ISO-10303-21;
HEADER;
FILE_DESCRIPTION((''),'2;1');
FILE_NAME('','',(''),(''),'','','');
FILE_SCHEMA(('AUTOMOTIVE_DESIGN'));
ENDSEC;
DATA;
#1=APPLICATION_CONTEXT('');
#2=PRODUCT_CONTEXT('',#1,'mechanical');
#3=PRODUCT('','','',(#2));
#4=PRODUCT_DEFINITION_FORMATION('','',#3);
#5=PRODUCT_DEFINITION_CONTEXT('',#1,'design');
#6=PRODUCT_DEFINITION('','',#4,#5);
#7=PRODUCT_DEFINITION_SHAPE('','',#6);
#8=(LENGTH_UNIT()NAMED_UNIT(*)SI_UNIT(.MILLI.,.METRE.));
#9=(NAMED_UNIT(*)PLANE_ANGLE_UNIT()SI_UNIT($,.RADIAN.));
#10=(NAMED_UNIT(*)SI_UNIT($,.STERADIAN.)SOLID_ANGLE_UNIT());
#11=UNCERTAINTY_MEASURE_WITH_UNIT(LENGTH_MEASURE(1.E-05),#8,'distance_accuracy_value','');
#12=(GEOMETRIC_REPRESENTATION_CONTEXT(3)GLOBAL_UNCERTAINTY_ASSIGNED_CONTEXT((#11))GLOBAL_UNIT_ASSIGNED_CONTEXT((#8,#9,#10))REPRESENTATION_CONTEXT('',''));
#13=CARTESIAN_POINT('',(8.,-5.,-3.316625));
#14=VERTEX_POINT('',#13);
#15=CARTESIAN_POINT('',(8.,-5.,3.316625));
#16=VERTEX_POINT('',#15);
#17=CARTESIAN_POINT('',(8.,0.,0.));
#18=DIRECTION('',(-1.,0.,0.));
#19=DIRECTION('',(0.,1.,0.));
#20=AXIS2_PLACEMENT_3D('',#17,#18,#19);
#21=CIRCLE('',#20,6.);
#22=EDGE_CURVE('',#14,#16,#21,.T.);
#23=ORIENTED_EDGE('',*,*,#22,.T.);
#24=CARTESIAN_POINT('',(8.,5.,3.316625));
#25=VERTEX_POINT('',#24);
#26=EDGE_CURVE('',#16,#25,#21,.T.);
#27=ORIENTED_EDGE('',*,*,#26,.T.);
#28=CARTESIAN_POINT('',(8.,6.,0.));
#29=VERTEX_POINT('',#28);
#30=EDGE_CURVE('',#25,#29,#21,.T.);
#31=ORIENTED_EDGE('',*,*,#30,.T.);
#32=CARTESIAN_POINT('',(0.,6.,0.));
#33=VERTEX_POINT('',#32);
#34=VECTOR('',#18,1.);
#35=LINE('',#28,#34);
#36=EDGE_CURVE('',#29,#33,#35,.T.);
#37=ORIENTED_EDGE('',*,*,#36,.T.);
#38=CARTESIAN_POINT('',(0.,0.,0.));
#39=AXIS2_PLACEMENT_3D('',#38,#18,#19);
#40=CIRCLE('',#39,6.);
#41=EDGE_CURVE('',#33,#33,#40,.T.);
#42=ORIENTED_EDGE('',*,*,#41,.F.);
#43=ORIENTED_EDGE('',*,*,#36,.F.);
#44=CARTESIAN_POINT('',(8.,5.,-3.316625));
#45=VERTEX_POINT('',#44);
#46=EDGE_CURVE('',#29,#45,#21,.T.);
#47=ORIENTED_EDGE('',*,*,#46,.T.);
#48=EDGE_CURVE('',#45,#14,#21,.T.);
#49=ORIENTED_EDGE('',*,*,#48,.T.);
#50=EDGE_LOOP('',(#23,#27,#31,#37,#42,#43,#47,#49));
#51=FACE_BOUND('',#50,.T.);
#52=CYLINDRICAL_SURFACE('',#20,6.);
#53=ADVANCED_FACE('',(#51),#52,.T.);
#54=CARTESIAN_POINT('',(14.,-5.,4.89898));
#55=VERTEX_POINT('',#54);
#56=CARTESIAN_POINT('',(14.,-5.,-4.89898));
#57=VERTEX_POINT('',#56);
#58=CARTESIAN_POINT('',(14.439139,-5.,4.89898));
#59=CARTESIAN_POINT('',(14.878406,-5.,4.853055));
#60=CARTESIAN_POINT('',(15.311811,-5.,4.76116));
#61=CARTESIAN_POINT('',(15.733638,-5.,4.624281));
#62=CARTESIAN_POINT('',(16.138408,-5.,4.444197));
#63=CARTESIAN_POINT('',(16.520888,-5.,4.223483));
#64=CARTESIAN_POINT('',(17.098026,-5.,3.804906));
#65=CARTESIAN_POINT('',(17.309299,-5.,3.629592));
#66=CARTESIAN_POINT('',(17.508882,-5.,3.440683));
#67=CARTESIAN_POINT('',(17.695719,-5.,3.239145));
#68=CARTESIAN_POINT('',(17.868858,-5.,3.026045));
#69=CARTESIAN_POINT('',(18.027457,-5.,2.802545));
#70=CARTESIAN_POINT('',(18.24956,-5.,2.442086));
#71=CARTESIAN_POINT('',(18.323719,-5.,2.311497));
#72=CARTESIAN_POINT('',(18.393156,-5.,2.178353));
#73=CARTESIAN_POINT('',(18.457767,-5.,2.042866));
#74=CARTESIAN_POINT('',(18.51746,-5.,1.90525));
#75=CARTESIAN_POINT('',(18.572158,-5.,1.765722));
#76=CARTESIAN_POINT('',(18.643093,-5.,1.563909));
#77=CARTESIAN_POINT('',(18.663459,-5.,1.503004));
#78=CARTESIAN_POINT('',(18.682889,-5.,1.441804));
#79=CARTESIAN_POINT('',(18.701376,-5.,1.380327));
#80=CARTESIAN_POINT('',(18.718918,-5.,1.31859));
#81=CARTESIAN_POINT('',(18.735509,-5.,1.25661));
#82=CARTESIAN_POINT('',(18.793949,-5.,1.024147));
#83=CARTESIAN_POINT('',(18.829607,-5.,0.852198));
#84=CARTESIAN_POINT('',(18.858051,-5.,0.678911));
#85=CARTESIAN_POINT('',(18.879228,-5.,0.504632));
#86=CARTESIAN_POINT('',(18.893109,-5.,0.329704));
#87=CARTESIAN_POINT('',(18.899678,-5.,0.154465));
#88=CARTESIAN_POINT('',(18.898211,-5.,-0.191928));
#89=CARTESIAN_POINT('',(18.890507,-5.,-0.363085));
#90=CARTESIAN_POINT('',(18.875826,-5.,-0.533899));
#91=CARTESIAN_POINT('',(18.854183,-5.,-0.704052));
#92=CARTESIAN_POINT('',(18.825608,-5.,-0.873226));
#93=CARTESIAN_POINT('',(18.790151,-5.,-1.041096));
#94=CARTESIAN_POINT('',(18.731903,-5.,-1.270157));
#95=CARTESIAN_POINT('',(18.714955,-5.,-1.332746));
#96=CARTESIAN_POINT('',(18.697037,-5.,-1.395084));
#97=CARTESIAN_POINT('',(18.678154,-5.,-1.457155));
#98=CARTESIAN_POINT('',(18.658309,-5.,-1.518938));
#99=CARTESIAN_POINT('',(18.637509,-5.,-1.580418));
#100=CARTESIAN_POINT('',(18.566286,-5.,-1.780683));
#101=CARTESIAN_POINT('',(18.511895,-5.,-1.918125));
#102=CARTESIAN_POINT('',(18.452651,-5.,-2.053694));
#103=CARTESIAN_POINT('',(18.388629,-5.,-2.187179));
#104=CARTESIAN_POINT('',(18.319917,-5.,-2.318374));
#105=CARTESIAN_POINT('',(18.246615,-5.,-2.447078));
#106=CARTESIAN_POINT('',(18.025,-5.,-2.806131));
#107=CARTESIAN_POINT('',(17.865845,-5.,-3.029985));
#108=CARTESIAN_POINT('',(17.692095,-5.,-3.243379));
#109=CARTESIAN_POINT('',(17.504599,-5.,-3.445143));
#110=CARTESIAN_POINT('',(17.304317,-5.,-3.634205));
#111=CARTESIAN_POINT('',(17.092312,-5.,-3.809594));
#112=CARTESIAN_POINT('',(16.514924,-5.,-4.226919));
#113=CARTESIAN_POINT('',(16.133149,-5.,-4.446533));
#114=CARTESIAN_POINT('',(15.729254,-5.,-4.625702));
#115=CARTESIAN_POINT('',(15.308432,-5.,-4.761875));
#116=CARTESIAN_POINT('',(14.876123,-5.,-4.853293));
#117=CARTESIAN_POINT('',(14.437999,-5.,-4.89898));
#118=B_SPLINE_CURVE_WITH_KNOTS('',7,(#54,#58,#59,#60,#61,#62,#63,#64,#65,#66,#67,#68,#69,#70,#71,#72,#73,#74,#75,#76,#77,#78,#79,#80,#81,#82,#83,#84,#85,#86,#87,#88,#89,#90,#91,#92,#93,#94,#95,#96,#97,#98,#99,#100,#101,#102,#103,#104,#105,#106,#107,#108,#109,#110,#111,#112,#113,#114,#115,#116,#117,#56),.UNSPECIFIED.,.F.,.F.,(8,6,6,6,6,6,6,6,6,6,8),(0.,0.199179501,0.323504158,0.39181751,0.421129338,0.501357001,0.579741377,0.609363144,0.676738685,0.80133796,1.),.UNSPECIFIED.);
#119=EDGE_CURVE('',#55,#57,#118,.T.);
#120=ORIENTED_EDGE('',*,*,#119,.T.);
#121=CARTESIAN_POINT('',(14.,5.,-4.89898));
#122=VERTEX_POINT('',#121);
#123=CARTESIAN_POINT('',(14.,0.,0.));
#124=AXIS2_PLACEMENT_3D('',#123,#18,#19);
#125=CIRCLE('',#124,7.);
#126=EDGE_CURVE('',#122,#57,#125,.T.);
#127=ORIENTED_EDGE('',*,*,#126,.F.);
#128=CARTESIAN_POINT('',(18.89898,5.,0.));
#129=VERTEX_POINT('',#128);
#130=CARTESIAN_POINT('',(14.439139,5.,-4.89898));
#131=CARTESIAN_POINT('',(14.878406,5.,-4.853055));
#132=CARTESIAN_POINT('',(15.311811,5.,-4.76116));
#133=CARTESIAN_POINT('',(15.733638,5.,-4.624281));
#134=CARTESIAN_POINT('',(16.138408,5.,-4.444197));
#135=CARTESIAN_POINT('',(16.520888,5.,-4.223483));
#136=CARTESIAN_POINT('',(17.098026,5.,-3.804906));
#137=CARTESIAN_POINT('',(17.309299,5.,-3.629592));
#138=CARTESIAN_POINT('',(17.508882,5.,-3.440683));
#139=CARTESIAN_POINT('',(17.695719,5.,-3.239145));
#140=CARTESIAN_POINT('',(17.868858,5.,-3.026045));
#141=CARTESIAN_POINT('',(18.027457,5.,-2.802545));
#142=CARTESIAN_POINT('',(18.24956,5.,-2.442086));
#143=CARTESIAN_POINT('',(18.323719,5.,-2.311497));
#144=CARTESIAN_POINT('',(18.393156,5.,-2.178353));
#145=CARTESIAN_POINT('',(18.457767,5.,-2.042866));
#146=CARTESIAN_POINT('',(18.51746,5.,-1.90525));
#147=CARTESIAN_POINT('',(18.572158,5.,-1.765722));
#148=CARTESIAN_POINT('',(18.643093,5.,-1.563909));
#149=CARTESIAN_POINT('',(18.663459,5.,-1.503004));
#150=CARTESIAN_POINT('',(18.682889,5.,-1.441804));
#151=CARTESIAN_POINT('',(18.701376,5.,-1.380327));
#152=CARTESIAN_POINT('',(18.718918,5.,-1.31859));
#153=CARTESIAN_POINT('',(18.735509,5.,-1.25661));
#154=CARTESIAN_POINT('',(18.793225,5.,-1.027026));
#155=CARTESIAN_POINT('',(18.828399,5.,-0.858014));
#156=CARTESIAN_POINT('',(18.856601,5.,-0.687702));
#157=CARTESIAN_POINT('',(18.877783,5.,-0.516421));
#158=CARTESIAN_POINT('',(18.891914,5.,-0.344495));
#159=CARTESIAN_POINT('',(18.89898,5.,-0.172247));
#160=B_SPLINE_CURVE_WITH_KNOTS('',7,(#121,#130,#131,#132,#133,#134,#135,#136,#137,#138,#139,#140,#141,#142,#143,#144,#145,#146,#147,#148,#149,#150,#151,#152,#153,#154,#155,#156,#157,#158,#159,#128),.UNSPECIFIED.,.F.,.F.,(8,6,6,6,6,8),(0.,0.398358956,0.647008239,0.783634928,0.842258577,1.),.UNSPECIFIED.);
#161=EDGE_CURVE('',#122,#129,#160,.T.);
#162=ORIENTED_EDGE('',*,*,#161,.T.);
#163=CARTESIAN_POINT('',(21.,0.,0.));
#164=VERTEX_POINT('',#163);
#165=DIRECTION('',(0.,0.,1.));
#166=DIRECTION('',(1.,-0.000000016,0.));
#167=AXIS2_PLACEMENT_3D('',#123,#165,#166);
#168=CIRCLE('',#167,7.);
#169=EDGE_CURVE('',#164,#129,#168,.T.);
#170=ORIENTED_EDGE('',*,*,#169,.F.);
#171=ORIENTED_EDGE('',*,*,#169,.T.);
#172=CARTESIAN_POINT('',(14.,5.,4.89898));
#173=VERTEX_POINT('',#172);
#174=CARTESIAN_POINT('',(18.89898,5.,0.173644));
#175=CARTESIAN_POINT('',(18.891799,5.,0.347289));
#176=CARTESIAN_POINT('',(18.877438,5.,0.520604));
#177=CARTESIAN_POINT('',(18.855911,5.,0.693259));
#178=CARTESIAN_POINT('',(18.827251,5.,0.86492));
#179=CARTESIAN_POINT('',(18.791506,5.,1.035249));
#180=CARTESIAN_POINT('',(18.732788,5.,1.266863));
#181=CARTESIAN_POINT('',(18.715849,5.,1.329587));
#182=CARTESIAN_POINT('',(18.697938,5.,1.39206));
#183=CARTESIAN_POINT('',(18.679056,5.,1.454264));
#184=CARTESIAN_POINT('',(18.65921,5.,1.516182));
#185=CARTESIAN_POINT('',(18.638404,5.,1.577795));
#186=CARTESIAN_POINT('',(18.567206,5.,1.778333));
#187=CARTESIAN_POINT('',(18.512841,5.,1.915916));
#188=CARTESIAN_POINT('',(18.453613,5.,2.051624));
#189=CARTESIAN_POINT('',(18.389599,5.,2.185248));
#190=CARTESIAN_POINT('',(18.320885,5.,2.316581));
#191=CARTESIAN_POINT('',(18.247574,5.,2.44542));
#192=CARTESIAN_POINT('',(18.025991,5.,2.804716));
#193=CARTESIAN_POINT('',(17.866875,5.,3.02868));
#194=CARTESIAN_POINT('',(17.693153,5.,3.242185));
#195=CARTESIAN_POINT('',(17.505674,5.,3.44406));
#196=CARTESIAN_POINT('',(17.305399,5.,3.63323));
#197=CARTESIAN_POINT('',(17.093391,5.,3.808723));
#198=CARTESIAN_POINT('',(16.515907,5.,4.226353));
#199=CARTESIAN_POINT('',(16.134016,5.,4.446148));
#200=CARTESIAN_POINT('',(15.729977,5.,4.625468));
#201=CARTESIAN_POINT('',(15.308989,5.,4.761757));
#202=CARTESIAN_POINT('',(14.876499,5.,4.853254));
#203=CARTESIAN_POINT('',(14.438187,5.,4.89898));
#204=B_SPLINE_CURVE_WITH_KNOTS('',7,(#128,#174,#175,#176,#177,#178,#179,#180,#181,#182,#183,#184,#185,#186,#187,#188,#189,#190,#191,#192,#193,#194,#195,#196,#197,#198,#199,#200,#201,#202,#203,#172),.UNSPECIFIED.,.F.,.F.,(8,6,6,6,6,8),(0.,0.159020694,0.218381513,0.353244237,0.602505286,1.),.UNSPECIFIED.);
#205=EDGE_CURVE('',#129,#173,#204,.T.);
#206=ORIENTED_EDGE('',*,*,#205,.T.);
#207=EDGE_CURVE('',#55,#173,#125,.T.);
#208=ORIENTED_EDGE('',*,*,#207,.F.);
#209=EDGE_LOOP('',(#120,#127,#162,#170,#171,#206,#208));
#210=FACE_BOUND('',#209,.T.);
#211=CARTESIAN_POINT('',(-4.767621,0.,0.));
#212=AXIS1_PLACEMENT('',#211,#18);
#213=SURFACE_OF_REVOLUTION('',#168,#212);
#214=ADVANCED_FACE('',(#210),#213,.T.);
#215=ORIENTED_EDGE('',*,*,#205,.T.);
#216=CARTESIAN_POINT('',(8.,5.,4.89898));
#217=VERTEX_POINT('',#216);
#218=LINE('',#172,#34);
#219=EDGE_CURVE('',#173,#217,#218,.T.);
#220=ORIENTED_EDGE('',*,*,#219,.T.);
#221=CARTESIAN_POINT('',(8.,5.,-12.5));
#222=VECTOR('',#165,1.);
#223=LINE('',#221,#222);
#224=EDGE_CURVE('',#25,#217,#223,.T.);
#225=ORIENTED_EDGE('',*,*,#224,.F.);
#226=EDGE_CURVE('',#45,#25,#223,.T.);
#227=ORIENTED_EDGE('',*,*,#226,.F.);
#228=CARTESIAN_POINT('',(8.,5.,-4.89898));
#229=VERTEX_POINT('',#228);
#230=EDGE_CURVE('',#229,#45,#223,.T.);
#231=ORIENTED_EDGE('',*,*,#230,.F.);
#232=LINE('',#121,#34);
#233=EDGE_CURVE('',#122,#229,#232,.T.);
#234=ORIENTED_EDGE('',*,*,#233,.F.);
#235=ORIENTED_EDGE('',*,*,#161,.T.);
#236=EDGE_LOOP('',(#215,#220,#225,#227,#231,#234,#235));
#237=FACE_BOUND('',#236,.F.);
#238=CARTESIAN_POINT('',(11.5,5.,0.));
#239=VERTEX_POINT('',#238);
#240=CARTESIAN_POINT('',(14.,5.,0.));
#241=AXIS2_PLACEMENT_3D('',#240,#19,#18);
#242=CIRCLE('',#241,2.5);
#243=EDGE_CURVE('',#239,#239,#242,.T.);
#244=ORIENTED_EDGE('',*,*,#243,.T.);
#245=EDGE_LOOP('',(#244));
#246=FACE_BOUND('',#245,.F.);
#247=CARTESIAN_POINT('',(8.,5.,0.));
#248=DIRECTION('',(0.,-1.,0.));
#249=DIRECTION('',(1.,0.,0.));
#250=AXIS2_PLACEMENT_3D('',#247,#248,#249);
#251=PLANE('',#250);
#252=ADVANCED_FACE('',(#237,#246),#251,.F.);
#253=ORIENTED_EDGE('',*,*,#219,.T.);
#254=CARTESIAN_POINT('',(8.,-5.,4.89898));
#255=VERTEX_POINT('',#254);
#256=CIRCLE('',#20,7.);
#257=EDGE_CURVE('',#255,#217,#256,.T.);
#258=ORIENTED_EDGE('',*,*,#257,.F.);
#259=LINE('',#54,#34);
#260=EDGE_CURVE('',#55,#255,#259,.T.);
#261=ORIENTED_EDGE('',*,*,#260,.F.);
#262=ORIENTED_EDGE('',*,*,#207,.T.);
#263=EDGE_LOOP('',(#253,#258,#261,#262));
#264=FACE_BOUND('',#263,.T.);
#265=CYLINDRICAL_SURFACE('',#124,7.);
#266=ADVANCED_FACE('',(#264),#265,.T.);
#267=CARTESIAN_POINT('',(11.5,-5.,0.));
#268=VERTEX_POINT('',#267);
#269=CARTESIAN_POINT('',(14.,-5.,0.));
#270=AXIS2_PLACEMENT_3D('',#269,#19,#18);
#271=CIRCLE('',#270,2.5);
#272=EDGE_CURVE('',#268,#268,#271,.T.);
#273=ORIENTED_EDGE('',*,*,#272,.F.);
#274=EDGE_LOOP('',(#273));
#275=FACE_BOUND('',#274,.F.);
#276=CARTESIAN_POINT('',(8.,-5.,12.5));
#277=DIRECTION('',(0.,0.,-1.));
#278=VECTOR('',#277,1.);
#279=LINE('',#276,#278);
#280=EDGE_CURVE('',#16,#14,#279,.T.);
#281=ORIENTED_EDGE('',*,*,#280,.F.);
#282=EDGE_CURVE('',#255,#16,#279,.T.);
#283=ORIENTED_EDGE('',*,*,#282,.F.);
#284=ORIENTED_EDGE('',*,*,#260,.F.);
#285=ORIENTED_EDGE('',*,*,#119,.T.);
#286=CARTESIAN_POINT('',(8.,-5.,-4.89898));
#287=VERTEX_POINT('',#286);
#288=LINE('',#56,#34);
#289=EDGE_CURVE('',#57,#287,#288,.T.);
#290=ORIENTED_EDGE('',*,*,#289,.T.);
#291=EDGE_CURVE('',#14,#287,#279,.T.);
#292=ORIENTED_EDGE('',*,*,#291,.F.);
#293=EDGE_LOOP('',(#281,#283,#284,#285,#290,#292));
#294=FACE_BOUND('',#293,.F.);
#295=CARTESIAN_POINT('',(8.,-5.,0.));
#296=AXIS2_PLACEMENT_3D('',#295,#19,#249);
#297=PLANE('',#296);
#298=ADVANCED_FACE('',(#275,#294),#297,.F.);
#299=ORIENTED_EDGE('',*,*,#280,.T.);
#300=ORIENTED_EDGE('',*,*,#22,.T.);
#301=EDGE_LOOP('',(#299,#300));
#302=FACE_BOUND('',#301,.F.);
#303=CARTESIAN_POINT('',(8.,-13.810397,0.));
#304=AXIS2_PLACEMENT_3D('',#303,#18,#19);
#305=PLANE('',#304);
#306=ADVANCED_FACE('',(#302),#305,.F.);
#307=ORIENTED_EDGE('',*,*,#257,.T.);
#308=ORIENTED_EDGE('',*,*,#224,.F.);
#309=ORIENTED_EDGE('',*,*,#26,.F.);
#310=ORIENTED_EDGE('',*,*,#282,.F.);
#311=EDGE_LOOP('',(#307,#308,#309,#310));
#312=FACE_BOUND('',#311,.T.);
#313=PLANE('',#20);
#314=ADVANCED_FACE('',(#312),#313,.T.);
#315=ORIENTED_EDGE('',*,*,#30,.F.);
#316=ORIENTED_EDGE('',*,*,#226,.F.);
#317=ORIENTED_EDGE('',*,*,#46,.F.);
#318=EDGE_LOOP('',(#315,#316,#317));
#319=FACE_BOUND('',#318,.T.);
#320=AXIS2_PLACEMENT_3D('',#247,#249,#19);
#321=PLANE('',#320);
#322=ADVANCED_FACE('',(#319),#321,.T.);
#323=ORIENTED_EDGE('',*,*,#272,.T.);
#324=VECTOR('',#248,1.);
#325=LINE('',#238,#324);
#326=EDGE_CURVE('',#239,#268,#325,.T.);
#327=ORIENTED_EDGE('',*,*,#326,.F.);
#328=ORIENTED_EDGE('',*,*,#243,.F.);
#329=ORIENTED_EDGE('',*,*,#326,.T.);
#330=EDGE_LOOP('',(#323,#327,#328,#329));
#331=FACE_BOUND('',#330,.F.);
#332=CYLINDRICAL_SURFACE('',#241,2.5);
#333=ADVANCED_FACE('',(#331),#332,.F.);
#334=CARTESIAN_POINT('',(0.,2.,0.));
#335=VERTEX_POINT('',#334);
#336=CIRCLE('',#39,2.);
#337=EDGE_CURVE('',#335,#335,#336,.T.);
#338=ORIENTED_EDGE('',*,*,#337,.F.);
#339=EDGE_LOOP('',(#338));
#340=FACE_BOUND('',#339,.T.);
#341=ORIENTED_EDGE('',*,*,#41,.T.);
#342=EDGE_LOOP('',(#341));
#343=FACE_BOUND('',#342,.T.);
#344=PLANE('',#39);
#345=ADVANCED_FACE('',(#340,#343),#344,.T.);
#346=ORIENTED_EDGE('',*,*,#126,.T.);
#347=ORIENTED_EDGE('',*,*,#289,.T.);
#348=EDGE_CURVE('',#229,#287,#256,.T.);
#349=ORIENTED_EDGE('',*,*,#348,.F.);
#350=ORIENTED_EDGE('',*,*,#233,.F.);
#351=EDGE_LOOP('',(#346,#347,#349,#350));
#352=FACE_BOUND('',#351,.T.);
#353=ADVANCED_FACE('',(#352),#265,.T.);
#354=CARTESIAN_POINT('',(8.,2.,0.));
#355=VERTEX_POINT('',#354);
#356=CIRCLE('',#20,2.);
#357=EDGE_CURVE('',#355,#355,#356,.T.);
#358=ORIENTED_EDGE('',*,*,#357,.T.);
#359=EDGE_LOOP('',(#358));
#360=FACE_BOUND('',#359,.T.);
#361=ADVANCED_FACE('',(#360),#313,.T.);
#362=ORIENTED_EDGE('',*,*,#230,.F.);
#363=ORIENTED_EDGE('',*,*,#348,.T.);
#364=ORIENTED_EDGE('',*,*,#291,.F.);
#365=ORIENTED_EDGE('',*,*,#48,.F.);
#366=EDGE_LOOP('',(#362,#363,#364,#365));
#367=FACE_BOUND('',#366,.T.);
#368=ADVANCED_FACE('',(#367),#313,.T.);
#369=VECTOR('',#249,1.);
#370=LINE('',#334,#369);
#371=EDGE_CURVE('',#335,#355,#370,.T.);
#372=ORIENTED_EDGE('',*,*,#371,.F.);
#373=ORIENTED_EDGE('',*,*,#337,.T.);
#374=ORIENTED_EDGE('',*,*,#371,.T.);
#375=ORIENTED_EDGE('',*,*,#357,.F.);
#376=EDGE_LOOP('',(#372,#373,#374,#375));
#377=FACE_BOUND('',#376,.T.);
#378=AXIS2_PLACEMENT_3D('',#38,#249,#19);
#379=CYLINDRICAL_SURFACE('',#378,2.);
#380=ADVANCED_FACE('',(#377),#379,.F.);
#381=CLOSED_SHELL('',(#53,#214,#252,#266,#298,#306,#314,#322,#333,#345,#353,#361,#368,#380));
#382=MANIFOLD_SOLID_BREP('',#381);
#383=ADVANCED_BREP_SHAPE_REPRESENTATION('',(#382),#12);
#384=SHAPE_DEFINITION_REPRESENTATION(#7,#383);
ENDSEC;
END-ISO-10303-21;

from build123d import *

# Parameters (mm, degrees)
F2_W     = 20
F2_H     = 8.8103966404
F3_DEPTH = 12.5
F4_R     = 2.5
F5_DEPTH = 25


# Not quite as in the source:
# - ends of sketch curves that miss each other by under 0.0002 mm in the source are joined


with BuildPart() as f1:
    # F0 (on Top) → F1 (revolve)
    with BuildSketch(Plane.XY):
        with BuildLine():
            Line((0, 6), (0, 2))
            Line((0, 2), (8, 2))
            Line((8, 2), (8, 0))
            Line((8, 0), (21, 0))
            ThreePointArc((21, 0), (18.9497474683, 4.9497475801), (14, 7.0000001118))
            Line((14, 7.0000001118), (8, 7.0000001118))
            Line((8, 7.0000001118), (8, 6))
            Line((8, 6), (0, 6))
        make_face()
    revolve(axis=Axis((-4.767620936, 0, 0), (-1, 0, 0)))

    # F2 (on Top) → F3 (cut, symmetric)
    with BuildSketch(Plane.XY):
        with Locations((18, -9.4051983202)):
            Rectangle(F2_W, F2_H)
        with Locations((18, 9.4051983202)):
            Rectangle(F2_W, F2_H)
    extrude(amount=F3_DEPTH, both=True, mode=Mode.SUBTRACT)

    # F4 (on face) → F5 (cut)
    with BuildSketch(Plane(origin=(0, 5, 0), x_dir=(-1, 0, 0), z_dir=(0, 1, 0))):
        with Locations((-14, 0)):
            Circle(F4_R)
    extrude(amount=-F5_DEPTH, mode=Mode.SUBTRACT)


solid = f1.part
